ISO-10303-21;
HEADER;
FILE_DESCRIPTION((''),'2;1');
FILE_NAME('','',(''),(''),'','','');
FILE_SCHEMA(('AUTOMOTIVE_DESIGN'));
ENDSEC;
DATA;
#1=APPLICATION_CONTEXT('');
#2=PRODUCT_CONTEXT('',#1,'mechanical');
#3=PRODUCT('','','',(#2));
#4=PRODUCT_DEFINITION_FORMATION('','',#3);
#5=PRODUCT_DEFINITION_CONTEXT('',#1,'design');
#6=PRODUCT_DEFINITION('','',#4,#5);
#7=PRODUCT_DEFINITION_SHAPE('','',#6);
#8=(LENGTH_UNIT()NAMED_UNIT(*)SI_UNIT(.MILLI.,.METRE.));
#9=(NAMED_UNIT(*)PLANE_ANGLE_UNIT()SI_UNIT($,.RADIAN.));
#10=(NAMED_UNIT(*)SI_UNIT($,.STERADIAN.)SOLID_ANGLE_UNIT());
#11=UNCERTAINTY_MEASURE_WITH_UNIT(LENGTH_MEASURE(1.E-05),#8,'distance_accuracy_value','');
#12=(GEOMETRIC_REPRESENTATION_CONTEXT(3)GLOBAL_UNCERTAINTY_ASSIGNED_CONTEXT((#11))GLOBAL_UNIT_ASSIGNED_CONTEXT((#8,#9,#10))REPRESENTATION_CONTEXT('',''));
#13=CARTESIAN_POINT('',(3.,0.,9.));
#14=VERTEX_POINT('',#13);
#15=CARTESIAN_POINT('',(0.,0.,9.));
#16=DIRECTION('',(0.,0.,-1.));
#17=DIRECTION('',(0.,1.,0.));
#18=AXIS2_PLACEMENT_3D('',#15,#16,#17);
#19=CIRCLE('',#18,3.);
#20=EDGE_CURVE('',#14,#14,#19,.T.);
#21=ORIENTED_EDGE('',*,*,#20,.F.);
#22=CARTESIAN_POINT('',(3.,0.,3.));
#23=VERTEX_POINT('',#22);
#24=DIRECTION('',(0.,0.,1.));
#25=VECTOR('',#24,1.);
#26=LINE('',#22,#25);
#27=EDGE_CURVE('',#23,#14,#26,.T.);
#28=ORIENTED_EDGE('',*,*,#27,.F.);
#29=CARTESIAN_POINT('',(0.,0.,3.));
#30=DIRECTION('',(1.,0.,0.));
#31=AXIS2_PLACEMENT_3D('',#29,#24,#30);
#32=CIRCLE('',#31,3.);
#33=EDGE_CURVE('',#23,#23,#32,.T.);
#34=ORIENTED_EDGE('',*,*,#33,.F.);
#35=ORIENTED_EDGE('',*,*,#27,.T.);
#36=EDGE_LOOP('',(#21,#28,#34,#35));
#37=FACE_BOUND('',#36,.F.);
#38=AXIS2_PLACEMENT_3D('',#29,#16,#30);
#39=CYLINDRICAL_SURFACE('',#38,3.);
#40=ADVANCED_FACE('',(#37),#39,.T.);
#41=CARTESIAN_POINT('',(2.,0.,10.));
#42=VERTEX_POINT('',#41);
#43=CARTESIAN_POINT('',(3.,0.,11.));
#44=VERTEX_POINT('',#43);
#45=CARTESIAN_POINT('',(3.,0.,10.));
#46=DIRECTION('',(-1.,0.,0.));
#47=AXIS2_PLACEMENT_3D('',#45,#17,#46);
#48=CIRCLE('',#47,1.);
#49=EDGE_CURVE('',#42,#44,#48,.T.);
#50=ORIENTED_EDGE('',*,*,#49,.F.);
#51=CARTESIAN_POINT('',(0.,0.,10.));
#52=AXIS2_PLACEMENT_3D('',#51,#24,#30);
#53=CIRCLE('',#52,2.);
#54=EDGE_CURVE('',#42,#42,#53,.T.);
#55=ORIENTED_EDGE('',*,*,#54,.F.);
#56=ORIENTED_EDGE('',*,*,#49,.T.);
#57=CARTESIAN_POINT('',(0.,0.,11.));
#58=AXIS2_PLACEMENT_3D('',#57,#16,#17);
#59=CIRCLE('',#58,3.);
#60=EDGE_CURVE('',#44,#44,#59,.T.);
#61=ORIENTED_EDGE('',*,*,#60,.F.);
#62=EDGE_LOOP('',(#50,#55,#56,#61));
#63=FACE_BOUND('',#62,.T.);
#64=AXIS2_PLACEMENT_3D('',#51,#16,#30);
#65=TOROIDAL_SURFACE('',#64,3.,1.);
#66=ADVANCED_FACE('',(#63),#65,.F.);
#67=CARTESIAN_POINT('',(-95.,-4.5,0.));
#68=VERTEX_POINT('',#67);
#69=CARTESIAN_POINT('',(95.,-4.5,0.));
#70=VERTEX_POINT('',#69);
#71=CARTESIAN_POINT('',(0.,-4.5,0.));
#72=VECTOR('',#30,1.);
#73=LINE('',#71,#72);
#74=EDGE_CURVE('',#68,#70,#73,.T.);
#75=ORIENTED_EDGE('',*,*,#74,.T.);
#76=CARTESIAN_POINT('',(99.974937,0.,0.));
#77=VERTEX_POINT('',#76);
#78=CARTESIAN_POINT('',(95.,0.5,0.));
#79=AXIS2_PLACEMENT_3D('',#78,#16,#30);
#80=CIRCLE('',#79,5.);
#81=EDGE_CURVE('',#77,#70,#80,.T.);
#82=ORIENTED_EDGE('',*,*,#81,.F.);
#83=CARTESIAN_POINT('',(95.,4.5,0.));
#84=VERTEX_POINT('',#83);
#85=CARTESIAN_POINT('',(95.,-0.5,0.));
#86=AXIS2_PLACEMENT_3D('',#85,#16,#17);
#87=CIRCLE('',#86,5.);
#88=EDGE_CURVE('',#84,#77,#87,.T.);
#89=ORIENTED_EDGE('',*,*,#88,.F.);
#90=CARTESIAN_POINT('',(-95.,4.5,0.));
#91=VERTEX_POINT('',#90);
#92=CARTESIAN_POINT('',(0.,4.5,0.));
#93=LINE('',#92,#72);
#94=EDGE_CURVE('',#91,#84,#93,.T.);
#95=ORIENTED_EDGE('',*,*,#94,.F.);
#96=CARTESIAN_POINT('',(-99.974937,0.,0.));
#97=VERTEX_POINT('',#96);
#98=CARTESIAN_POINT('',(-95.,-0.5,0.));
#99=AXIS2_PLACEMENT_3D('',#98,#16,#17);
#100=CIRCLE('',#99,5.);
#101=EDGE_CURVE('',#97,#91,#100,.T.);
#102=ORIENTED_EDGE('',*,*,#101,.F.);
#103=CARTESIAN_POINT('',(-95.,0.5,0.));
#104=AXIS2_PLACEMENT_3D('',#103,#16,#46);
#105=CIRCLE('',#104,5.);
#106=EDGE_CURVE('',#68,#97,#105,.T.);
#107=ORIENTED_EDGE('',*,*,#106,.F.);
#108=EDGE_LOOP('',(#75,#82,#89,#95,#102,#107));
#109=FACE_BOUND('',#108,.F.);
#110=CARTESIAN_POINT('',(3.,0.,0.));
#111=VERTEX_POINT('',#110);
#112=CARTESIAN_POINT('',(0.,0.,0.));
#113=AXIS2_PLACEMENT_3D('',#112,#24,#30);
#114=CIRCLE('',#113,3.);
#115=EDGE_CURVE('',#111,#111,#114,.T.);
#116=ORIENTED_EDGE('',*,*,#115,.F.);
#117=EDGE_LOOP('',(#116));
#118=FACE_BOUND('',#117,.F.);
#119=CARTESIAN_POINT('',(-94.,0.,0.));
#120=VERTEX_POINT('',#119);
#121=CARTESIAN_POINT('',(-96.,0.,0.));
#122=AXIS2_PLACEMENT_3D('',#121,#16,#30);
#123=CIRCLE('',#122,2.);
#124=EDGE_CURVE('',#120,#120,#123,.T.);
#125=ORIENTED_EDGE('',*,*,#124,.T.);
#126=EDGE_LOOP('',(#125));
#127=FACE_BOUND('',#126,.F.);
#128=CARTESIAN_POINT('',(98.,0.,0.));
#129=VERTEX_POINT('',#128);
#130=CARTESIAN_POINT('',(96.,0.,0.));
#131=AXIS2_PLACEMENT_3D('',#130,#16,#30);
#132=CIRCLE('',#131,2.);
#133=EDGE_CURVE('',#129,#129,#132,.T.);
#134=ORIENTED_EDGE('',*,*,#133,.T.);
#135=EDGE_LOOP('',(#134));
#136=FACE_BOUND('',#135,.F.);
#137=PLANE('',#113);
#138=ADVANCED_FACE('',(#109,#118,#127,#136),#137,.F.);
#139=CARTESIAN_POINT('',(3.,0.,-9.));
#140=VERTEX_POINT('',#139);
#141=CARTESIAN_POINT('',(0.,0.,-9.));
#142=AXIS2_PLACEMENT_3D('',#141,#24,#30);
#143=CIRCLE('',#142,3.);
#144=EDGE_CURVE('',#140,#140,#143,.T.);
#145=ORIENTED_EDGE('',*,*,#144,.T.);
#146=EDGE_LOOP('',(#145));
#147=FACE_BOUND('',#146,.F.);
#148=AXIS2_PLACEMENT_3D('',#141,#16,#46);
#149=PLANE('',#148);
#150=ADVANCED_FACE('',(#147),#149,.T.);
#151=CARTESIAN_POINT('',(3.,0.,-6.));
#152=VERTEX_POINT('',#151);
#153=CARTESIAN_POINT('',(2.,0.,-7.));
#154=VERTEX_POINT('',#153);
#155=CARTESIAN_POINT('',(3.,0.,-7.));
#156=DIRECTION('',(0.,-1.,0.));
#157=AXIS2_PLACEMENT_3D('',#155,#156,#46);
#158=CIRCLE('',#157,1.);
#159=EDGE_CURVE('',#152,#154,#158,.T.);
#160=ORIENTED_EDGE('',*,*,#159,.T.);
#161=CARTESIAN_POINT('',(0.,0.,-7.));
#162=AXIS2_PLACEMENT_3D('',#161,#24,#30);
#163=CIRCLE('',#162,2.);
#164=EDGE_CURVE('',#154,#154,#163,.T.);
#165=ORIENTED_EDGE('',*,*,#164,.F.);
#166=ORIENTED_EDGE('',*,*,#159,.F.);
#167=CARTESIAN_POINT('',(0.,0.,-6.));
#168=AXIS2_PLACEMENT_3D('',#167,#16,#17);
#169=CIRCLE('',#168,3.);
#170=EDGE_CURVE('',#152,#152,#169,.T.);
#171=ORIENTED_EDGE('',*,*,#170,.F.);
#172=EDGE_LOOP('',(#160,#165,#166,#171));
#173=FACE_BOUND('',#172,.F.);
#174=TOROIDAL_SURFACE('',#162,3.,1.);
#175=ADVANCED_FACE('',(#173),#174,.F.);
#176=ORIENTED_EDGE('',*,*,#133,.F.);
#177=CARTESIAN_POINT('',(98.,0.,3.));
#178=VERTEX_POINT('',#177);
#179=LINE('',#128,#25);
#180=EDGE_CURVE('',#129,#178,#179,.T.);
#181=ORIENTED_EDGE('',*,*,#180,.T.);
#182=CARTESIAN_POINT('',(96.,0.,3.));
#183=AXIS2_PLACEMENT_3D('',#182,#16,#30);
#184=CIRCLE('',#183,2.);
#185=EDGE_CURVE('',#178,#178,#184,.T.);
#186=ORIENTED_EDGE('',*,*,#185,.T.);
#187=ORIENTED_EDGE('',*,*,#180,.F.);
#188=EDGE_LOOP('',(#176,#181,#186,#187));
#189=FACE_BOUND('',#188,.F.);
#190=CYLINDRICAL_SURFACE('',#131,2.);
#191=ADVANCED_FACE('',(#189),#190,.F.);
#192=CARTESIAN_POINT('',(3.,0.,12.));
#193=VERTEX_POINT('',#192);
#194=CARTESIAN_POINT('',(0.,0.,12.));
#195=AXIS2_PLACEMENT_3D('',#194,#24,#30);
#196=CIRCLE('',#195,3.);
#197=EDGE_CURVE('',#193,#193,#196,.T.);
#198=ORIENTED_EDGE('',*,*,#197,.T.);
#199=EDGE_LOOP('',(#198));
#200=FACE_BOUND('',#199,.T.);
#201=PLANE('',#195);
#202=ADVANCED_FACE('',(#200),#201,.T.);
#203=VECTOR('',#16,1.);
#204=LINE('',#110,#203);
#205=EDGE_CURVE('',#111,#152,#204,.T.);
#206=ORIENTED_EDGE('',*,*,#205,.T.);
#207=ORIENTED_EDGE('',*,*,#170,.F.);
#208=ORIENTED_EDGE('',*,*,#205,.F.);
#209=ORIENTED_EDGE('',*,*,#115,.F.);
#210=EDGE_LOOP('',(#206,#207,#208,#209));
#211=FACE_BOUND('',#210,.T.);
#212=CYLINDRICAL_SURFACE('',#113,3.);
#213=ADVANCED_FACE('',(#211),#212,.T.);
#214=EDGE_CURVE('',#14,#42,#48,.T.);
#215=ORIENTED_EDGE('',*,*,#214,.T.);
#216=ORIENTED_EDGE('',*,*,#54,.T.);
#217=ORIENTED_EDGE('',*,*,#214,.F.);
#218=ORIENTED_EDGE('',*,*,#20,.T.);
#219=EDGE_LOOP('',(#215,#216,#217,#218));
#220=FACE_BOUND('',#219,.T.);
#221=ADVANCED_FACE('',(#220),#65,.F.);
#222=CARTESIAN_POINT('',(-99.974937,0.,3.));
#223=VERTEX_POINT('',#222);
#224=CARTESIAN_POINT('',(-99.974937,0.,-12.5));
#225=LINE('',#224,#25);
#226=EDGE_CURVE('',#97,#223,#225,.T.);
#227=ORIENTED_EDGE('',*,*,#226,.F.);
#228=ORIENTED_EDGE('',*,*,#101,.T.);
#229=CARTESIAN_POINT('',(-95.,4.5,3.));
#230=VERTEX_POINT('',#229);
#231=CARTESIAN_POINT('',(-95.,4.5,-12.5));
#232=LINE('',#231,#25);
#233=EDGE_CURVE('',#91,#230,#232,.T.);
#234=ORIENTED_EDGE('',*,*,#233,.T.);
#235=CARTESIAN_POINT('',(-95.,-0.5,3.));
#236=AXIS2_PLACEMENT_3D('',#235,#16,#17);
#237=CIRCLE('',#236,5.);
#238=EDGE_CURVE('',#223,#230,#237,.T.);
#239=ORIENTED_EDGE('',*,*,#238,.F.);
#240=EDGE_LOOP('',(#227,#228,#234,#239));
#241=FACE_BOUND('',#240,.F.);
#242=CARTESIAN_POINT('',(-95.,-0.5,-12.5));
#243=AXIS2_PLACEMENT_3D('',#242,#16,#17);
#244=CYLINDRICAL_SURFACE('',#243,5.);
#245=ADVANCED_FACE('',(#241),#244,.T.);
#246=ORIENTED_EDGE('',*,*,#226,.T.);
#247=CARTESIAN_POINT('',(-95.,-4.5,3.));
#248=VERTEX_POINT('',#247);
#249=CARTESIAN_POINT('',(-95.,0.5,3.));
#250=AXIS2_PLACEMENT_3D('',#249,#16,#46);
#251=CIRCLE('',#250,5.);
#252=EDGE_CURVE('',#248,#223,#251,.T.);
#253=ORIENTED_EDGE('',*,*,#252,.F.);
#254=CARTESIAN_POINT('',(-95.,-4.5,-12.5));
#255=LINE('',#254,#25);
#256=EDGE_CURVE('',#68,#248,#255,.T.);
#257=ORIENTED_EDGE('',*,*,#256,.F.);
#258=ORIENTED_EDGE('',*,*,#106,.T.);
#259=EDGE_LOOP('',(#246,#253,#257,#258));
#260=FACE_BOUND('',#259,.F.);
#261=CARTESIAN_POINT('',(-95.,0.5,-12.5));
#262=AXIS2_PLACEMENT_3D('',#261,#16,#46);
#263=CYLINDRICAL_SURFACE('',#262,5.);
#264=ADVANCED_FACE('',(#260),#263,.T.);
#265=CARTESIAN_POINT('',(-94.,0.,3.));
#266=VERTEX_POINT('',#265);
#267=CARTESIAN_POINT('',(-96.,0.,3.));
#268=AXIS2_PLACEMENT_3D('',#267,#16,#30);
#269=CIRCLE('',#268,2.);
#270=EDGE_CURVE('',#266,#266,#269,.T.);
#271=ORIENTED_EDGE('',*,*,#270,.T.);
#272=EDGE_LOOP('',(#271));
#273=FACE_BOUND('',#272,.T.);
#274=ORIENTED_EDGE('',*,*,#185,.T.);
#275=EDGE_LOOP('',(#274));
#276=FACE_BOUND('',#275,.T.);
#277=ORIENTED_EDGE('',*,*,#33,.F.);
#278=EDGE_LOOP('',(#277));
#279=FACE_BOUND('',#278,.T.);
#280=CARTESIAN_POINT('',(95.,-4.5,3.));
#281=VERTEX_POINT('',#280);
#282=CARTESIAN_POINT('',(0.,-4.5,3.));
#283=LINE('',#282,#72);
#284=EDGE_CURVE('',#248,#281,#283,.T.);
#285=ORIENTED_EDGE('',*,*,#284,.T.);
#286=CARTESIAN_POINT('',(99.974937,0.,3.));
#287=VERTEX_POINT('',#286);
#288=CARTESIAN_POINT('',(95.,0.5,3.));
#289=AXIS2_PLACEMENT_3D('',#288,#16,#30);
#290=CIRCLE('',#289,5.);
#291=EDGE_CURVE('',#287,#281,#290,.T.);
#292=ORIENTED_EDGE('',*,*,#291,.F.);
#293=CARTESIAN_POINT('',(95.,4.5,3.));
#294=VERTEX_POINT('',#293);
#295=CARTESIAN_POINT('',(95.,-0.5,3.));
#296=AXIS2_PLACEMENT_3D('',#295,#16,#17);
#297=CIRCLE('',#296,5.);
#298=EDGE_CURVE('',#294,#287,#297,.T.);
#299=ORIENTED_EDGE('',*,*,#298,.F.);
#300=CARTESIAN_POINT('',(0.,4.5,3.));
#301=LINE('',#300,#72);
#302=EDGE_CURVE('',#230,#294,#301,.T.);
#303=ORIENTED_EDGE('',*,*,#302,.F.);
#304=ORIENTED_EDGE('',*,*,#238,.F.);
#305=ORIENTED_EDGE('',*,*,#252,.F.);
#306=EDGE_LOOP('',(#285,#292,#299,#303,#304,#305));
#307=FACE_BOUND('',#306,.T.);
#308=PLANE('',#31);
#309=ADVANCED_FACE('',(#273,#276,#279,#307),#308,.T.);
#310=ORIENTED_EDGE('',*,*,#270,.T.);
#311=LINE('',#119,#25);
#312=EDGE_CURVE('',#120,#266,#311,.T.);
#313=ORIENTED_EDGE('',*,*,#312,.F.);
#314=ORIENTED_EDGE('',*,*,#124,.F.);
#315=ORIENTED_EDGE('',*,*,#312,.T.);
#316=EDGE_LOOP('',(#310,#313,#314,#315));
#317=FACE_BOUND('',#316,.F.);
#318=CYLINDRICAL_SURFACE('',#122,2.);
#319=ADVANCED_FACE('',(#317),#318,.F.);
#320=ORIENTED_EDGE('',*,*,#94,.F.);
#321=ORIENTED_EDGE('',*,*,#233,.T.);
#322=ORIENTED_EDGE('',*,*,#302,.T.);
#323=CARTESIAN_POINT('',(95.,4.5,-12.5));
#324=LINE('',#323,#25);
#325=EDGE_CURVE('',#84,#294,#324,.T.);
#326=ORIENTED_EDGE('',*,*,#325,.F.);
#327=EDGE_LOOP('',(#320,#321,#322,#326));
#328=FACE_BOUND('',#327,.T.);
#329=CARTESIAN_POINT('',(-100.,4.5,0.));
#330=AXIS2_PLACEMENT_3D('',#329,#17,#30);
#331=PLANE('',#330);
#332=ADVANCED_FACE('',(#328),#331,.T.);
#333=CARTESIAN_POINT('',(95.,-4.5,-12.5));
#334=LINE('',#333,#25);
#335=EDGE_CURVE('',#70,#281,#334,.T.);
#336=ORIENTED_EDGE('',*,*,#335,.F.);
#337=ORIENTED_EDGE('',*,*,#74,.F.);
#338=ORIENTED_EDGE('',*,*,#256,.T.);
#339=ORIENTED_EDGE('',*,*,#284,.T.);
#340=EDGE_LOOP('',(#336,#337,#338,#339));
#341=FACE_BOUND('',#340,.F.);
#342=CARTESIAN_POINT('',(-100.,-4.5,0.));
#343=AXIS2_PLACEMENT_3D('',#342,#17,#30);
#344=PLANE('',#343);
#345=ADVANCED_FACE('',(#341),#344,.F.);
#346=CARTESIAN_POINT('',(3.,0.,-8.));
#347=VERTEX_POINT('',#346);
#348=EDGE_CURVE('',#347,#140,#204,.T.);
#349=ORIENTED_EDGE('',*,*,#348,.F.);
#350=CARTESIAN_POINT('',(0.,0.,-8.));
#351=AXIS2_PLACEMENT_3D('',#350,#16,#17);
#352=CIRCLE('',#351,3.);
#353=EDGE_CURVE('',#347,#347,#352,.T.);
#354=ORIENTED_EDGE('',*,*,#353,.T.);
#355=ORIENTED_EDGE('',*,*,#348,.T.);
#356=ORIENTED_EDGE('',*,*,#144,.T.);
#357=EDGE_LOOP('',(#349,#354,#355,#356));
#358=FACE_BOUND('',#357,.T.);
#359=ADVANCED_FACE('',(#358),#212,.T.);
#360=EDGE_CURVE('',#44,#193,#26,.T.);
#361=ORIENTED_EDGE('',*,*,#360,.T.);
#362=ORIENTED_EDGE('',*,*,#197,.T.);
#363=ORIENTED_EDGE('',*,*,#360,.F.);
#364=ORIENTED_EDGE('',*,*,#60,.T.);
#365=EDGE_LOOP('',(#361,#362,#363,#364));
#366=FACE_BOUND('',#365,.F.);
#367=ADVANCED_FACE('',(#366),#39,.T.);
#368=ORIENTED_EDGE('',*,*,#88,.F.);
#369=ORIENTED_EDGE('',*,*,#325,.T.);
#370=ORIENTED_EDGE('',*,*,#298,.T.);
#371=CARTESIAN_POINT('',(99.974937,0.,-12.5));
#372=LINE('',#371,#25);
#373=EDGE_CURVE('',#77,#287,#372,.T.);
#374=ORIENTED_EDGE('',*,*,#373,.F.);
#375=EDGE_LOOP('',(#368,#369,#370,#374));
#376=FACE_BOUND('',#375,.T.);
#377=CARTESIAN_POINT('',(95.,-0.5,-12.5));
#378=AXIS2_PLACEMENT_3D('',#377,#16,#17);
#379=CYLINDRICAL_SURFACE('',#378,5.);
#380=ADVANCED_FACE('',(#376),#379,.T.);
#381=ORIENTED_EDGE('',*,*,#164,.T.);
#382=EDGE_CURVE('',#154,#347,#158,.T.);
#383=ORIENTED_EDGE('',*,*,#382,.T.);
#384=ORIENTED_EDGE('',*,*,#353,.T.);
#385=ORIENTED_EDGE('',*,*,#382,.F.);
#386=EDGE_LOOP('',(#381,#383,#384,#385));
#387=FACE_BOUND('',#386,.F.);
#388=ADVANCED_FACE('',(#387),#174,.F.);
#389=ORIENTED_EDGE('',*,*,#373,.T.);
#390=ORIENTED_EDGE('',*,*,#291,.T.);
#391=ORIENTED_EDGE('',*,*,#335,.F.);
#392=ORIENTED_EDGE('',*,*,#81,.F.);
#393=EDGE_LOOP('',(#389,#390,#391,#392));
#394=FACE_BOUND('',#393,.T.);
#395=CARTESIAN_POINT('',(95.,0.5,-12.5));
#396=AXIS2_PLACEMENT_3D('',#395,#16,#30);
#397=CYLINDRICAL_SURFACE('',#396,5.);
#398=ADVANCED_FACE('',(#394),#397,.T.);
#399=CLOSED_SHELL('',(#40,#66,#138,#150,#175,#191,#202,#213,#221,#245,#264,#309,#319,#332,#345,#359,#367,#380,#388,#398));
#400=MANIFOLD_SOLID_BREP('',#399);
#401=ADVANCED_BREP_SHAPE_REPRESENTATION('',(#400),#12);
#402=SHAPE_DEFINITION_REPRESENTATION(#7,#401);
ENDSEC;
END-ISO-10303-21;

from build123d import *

# Parameters (mm, degrees)
F0_W        = 200
F0_H        = 9
F1_DEPTH    = 3
F2_R        = 2
F3_DEPTH    = 25
F4_T1_DEPTH = 28
F5_R        = 3
F6_DEPTH    = 9
F8_R        = 1


# Not quite as in the source:
# - a fillet or chamfer that OpenCascade refuses, or shapes differently, is made with other operations: its cross-section is extruded or revolved along the edge and cut away or added


with BuildPart() as f1:
    # F0 (on Top) → F1 (new body)
    with BuildSketch(Plane.XY):
        Rectangle(F0_W, F0_H)
    extrude(amount=F1_DEPTH)

    # F2 (on face) → F3 (cut)
    with BuildSketch(Plane(origin=(0, 0, 0), x_dir=(1, 0, 0), z_dir=(0, 0, -1))):
        with Locations((-96, 0)):
            Circle(F2_R)
        with Locations((96, 0)):
            Circle(F2_R)
    extrude(amount=-F3_DEPTH, mode=Mode.SUBTRACT)

    # F4: fillet of radius 5 on 4 edges, made by hand

    # F4_s2 → F4_t1 (cut)
    with BuildSketch(Plane.XY.offset(-12.5)):
        with BuildLine():
            ThreePointArc((95, 4.5), (98.5355339059, 3.0355339059), (100, -0.5))
            Line((100, -0.5), (100, 4.5))
            Line((100, 4.5), (95, 4.5))
        make_face()
        with BuildLine():
            ThreePointArc((100, 0.5), (98.5355339059, -3.0355339059), (95, -4.5))
            Line((95, -4.5), (100, -4.5))
            Line((100, -4.5), (100, 0.5))
        make_face()
        with BuildLine():
            ThreePointArc((-95, 4.5), (-98.5355339059, 3.0355339059), (-100, -0.5))
            Line((-100, -0.5), (-100, 4.5))
            Line((-100, 4.5), (-95, 4.5))
        make_face()
        with BuildLine():
            ThreePointArc((-100, 0.5), (-98.5355339059, -3.0355339059), (-95, -4.5))
            Line((-95, -4.5), (-100, -4.5))
            Line((-100, -4.5), (-100, 0.5))
        make_face()
    extrude(amount=F4_T1_DEPTH, mode=Mode.SUBTRACT)

    # F5 (on face) → F6 (join)
    with BuildSketch(Plane.XY.offset(3)):
        Circle(F5_R)
    extrude(amount=F6_DEPTH)

    # F8 (on face) → F9 (revolve, cut)
    with BuildSketch(Plane(origin=(0, 0, 0), x_dir=(-1, 0, 0), z_dir=(0, 1, 0))):
        with Locations((-3, 10)):
            Circle(F8_R)
    revolve(axis=Axis((0, 0, 12), (0, 0, 1)), mode=Mode.SUBTRACT)

    # F14: F1 across plane


with BuildPart() as f1_1:
    add(f1.part)
    add(f1.part.mirror(Plane(origin=(95, -4.5, 1.5), x_dir=(-1, 0, 0), z_dir=(0, 0, 1))))


solid = f1_1.part
